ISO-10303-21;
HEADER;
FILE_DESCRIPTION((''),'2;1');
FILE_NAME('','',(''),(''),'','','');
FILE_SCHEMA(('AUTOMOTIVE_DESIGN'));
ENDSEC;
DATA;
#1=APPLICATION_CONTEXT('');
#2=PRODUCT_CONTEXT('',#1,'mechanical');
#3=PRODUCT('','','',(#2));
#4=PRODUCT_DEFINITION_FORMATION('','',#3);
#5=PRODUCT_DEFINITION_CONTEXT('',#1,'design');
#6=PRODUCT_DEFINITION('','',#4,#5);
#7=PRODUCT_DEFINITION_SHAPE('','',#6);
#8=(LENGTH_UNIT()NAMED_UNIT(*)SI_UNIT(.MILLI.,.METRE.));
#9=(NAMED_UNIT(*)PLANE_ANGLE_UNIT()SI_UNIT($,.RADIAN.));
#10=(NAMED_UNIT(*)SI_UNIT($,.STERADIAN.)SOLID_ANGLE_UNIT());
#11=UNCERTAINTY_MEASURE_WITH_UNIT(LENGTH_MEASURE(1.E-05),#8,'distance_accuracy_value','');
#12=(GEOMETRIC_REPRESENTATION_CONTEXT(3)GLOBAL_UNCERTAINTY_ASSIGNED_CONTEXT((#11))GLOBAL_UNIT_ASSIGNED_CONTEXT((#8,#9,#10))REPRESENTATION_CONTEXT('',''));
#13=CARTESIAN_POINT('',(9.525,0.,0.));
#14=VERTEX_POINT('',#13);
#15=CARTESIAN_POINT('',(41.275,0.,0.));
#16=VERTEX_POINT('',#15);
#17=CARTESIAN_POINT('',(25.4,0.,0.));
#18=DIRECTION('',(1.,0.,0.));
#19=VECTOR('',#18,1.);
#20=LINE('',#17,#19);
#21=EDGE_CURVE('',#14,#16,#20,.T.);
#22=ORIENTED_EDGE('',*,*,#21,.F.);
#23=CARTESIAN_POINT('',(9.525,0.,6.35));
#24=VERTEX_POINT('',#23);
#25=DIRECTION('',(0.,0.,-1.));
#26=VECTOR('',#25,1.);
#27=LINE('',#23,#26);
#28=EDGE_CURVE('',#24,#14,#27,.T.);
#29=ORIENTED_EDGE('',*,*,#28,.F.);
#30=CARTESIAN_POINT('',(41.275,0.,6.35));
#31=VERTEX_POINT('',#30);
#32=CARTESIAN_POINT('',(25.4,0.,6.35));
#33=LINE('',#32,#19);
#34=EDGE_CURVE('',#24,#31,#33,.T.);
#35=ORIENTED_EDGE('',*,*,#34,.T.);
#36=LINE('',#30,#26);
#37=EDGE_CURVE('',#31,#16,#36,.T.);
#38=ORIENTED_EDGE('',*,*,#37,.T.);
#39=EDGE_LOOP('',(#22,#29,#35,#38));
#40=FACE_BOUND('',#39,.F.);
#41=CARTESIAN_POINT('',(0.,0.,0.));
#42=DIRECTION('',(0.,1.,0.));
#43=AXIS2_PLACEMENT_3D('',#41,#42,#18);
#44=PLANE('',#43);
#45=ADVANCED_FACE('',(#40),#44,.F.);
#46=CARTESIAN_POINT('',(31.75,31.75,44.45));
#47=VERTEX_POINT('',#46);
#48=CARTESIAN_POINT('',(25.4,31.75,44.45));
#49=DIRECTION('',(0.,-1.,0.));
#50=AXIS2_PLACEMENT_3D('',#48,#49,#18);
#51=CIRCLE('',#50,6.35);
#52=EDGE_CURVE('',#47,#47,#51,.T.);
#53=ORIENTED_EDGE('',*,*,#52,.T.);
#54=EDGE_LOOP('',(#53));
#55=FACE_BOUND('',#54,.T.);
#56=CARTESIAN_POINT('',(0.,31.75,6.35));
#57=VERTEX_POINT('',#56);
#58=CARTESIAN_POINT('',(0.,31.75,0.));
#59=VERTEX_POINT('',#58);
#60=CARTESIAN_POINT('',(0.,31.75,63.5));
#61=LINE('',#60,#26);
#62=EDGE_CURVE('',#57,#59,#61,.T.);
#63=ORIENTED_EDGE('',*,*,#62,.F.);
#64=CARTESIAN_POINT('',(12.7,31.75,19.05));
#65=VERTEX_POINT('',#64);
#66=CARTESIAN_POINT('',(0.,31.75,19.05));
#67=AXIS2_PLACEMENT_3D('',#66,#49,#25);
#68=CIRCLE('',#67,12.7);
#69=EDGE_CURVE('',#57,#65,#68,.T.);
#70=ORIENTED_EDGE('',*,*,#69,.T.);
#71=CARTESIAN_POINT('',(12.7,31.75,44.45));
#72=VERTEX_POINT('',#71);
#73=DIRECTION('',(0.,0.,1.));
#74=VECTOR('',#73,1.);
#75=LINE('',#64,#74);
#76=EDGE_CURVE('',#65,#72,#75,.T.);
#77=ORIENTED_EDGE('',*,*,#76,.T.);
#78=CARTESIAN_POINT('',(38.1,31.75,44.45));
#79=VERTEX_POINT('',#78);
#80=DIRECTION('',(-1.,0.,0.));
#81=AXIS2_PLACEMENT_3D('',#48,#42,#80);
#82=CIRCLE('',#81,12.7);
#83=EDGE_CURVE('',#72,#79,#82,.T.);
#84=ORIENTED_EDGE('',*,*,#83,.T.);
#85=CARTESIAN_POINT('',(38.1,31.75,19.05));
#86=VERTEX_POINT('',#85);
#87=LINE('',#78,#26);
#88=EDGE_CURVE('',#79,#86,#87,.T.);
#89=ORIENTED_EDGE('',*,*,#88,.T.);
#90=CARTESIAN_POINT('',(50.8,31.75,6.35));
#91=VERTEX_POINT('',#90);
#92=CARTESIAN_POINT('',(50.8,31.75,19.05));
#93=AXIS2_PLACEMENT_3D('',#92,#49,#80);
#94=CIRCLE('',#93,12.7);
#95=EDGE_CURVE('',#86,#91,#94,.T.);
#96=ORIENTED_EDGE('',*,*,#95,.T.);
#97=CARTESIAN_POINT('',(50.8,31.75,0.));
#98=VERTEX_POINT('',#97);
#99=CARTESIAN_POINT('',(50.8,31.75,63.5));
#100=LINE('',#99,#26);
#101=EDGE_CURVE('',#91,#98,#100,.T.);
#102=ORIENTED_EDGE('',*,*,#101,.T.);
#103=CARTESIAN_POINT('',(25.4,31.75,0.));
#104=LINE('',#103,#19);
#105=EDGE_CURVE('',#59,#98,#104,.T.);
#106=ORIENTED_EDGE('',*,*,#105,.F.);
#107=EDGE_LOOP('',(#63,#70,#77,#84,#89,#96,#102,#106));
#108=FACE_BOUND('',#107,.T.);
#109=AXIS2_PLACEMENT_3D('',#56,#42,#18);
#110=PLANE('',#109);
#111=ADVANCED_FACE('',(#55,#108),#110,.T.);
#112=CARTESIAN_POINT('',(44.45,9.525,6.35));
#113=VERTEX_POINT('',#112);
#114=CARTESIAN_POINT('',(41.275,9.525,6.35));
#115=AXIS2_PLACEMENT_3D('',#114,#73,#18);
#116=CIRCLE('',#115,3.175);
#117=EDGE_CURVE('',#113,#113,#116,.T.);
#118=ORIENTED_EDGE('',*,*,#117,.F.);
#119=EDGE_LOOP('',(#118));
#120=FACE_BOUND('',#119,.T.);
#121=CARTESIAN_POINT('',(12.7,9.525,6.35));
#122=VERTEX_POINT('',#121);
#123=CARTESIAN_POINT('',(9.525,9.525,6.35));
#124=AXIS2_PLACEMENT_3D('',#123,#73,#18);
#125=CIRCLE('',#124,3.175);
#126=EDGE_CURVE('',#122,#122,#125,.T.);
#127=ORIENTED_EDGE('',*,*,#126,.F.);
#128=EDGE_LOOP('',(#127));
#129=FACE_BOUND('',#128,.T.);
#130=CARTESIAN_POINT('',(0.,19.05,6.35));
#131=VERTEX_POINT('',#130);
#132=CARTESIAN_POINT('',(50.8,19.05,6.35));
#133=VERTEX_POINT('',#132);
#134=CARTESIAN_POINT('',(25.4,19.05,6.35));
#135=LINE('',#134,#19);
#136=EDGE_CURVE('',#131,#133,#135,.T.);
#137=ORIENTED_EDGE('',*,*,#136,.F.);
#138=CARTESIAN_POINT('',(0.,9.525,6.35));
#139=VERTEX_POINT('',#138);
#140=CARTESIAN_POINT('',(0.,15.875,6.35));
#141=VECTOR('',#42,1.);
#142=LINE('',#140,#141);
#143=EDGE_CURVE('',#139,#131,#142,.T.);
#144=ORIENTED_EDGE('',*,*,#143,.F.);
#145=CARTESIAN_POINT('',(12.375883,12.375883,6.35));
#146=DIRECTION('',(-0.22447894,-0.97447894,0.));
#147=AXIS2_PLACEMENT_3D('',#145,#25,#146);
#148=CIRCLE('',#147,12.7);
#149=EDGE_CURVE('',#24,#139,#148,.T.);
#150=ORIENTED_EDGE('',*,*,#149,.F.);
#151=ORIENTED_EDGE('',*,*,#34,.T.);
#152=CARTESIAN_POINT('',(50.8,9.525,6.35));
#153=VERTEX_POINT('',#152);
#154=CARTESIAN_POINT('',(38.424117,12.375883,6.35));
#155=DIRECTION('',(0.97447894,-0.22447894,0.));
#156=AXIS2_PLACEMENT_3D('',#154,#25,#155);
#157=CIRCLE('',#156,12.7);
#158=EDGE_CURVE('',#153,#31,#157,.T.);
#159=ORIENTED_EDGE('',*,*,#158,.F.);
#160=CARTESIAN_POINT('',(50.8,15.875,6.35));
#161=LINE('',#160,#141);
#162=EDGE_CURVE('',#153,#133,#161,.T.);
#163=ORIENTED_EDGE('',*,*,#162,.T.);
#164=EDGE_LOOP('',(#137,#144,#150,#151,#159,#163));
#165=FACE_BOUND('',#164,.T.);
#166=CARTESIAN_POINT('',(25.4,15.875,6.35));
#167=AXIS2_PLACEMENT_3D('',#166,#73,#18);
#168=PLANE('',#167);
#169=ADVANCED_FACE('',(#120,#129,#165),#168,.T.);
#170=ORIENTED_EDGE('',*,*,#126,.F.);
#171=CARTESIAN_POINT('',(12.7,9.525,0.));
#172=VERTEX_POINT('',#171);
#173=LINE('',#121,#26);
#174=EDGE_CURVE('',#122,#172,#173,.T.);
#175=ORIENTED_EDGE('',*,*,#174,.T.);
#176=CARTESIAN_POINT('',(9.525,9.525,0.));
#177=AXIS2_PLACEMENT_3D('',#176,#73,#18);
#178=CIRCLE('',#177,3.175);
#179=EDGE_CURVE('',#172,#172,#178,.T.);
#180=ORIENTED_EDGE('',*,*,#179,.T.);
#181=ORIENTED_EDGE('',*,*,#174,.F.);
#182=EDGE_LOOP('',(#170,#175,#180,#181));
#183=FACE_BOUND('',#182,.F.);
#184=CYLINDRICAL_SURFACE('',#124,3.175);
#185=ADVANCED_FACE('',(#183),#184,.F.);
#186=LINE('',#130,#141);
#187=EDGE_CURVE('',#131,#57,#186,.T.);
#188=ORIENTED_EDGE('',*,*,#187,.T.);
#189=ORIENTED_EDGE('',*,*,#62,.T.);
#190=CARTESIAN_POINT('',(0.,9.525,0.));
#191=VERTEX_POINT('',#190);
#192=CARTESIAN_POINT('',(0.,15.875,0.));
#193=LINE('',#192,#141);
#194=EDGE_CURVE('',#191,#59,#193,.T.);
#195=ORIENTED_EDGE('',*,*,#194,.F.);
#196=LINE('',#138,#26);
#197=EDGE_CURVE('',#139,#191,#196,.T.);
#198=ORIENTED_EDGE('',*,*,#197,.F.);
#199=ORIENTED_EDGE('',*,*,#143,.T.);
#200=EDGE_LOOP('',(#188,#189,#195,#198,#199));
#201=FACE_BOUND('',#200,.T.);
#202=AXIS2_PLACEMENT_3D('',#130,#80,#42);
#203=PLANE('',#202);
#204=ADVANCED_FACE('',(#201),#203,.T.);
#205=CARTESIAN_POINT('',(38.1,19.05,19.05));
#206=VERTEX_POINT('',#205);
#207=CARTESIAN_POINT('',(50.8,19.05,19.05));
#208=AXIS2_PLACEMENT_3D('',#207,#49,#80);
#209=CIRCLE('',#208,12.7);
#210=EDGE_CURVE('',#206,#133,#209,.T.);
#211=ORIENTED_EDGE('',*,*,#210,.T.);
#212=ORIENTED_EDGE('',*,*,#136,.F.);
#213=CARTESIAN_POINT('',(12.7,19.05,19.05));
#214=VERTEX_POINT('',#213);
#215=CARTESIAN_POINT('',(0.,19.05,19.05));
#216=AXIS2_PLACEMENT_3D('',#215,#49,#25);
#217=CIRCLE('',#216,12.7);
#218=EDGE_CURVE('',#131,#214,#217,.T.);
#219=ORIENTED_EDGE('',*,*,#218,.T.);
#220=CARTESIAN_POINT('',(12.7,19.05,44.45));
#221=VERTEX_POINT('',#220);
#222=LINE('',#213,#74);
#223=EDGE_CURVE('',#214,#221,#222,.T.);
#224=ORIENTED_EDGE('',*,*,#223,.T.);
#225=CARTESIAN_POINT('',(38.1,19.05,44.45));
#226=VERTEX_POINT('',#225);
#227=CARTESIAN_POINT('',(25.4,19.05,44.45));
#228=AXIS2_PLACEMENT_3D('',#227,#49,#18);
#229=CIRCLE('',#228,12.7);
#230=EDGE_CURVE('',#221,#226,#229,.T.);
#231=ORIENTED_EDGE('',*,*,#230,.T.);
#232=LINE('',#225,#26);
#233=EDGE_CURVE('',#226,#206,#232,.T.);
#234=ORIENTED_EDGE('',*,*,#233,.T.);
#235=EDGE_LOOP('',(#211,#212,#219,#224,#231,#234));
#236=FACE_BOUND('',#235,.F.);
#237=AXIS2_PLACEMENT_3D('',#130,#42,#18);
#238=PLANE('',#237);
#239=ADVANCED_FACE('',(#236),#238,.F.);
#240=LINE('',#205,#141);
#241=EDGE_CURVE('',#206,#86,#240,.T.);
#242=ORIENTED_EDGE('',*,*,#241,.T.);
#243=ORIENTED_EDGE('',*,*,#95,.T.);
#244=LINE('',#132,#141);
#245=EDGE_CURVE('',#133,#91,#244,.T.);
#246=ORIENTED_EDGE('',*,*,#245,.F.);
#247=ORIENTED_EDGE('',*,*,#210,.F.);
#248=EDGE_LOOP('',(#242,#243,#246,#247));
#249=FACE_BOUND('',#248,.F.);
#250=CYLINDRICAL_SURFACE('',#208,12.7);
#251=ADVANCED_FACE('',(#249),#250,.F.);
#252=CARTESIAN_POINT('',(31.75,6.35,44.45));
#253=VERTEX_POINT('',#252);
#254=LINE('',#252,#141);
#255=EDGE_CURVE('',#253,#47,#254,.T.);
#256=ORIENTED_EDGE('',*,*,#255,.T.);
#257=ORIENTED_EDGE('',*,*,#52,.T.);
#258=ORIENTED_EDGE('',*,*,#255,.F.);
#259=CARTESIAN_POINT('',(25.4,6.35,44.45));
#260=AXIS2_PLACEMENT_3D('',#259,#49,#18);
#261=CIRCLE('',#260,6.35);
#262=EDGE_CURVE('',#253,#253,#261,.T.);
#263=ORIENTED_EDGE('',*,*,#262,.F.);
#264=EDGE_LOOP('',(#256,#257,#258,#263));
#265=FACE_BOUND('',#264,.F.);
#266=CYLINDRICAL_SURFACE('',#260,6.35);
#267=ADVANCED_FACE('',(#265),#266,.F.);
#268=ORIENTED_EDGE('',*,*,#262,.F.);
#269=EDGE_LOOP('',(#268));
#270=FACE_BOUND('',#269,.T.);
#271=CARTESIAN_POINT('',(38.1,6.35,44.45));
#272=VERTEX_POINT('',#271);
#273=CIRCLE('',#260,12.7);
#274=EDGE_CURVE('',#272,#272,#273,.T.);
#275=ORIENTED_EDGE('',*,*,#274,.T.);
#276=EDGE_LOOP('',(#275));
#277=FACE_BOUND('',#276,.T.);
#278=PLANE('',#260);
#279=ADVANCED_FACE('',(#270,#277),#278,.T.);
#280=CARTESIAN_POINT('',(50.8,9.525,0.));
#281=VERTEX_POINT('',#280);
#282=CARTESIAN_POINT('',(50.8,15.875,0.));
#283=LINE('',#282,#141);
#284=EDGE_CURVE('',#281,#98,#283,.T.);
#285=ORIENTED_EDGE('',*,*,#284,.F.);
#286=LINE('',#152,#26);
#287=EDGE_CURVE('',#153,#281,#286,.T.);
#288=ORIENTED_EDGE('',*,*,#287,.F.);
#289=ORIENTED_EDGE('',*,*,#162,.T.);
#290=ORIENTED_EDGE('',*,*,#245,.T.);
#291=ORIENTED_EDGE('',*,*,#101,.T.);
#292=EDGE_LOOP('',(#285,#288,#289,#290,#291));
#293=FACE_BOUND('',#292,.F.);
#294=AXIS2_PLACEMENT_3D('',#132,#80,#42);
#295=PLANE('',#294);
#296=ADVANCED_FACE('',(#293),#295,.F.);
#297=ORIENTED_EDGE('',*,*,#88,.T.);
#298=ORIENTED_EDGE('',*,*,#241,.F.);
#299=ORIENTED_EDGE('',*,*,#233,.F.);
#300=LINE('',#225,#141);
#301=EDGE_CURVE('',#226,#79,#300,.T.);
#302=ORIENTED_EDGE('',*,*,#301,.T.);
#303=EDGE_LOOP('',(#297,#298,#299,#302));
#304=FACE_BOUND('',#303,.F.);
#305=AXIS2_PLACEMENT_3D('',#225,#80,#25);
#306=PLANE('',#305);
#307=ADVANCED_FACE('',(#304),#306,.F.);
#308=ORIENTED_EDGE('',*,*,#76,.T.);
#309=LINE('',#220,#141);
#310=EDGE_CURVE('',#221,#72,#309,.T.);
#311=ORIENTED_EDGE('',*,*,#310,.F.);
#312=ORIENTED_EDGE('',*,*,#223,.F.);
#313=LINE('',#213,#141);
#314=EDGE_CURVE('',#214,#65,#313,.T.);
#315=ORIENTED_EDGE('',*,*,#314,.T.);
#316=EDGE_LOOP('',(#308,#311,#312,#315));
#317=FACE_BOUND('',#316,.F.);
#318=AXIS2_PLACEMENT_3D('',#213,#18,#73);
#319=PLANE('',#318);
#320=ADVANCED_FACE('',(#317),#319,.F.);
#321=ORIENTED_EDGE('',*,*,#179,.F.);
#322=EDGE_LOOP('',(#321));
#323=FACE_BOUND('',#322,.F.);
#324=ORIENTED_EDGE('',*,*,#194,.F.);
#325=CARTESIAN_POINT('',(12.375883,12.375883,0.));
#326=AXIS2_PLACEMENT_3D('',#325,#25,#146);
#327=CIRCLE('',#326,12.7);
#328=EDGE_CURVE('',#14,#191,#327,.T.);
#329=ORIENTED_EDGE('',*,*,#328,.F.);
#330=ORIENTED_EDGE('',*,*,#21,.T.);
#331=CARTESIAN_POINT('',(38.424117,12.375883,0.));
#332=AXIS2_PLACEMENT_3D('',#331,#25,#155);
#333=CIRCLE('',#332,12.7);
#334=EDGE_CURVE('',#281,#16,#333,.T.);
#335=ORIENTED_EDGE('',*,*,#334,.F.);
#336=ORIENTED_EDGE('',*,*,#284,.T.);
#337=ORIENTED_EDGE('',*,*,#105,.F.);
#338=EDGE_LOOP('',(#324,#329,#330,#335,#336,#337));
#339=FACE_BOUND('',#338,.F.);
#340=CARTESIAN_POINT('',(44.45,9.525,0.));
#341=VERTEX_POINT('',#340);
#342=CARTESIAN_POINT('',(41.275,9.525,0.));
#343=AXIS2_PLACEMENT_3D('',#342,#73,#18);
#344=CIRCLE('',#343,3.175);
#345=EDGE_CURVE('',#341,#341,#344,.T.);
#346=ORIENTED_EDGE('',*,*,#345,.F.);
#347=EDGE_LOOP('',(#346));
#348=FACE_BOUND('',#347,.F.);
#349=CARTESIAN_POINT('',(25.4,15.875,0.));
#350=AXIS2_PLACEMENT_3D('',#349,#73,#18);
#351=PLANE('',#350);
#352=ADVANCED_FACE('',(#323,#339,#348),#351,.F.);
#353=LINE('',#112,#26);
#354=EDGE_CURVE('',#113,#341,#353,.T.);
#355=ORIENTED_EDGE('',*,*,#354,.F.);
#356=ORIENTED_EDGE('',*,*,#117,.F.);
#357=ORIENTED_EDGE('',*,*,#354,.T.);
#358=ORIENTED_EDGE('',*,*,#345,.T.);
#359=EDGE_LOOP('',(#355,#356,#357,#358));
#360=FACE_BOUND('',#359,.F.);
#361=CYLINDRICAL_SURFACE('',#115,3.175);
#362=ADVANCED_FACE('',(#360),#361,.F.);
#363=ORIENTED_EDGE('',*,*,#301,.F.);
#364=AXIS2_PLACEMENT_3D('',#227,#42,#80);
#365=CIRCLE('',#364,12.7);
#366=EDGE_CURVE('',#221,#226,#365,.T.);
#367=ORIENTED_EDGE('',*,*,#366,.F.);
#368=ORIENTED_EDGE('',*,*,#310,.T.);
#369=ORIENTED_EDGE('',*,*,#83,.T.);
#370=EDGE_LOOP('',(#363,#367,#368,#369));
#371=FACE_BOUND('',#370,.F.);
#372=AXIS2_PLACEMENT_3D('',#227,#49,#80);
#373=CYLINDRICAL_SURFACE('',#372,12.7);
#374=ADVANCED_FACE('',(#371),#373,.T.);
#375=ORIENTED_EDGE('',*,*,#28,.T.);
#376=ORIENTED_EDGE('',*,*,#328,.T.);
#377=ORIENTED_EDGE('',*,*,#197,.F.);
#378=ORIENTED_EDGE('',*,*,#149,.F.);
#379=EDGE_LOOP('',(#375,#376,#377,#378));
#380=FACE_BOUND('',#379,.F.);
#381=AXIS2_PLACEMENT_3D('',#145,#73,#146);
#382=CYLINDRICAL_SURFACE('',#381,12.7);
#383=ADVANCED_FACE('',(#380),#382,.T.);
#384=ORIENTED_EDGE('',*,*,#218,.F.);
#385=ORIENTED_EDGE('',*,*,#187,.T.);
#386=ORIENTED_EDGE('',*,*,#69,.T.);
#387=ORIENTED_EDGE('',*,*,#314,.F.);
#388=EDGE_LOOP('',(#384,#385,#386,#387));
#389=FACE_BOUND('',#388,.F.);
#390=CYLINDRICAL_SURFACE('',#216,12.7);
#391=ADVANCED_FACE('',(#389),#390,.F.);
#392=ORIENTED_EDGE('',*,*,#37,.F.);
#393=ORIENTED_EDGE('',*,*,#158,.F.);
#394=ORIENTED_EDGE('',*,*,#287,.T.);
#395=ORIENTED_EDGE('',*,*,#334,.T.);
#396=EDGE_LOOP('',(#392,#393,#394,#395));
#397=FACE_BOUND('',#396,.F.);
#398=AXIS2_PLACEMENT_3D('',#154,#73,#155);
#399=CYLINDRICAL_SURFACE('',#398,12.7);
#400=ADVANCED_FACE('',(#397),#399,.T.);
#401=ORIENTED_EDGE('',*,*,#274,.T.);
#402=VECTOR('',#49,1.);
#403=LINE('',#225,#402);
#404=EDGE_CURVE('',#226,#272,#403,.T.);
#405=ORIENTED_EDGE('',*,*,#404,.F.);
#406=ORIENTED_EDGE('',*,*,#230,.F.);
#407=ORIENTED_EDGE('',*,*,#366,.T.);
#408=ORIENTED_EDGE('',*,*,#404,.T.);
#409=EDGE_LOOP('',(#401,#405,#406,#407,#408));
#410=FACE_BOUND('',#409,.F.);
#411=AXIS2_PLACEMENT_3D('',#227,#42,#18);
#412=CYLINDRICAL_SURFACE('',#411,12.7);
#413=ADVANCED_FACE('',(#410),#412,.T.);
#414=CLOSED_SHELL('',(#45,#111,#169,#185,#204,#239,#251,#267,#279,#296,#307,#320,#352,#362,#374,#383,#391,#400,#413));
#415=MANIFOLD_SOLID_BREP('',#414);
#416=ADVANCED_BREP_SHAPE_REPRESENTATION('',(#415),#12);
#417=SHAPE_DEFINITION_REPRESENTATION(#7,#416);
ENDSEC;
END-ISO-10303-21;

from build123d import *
from build123d import SkipClean  # not in build123d's __all__

# Parameters (mm, degrees)
F0_W      = 50.8
F0_H      = 31.75
F1_DEPTH  = 6.35
F2_R      = 3.175
F3_DEPTH  = 6.35
F4_W      = 50.8
F4_H      = 12.7
F5_DEPTH  = 57.15
F7_DEPTH  = 12.7
F8_DEPTH  = 12.7
F9_R      = 6.35
F10_DEPTH = 38.1


with BuildPart() as f1:
    # F0 (on Top) → F1 (new body)
    with BuildSketch(Plane.XY):
        with Locations((25.4, 15.875)):
            Rectangle(F0_W, F0_H)
    extrude(amount=F1_DEPTH)

    # F2 (on face) → F3 (cut)
    with BuildSketch(Plane.XY.offset(6.35)):
        with Locations((41.275, 9.525)):
            Circle(F2_R)
        with Locations((9.525, 9.525)):
            Circle(F2_R)
        with BuildLine():
            ThreePointArc((9.525, 0), (3.3956264222, 3.3956264222), (0, 9.525))
            Line((0, 9.525), (0, 0))
            Line((0, 0), (9.525, 0))
        make_face()
        with BuildLine():
            ThreePointArc((50.8, 9.525), (47.4043735778, 3.3956264222), (41.275, 0))
            Line((41.275, 0), (50.8, 0))
            Line((50.8, 0), (50.8, 9.525))
        make_face()
    extrude(amount=-F3_DEPTH, mode=Mode.SUBTRACT)

    # F4 (on face) → F5 (join)
    with BuildSketch(Plane.XY.offset(6.35)):
        with Locations((25.4, 25.4)):
            Rectangle(F4_W, F4_H)
    extrude(amount=F5_DEPTH)

    # F6 (on face) → F7 (cut)
    with BuildSketch(Plane.XZ.offset(-19.05)):
        with BuildLine():
            ThreePointArc((12.7, 44.45), (25.4, 57.15), (38.1, 44.45))
            Line((38.1, 44.45), (38.1, 19.05))
            ThreePointArc((38.1, 19.05), (41.8197438789, 10.0697438789), (50.8, 6.35))
            Line((50.8, 6.35), (50.8, 63.5))
            Line((50.8, 63.5), (0, 63.5))
            Line((0, 63.5), (0, 6.35))
            ThreePointArc((0, 6.35), (8.9802561211, 10.0697438789), (12.7, 19.05))
            Line((12.7, 19.05), (12.7, 44.45))
        make_face()
    extrude(amount=-F7_DEPTH, mode=Mode.SUBTRACT)

    # F6 (on face) → F8 (join)
    with BuildSketch(Plane.XZ.offset(-19.05)):
        with BuildLine():
            ThreePointArc((12.7, 44.45), (25.4, 31.75), (38.1, 44.45))
            ThreePointArc((38.1, 44.45), (25.4, 57.15), (12.7, 44.45))
        make_face()
    with SkipClean():  # cleaning this boolean's faces spoils the solid; the shape is the same uncleaned
        extrude(amount=F8_DEPTH)

    # F9 (on face) → F10 (cut)
    with BuildSketch(Plane.XZ.offset(-6.35)):
        with Locations((25.4, 44.45)):
            Circle(F9_R)
    with SkipClean():  # cleaning this boolean's faces spoils the solid; the shape is the same uncleaned
        extrude(amount=-F10_DEPTH, mode=Mode.SUBTRACT)


solid = f1.part
